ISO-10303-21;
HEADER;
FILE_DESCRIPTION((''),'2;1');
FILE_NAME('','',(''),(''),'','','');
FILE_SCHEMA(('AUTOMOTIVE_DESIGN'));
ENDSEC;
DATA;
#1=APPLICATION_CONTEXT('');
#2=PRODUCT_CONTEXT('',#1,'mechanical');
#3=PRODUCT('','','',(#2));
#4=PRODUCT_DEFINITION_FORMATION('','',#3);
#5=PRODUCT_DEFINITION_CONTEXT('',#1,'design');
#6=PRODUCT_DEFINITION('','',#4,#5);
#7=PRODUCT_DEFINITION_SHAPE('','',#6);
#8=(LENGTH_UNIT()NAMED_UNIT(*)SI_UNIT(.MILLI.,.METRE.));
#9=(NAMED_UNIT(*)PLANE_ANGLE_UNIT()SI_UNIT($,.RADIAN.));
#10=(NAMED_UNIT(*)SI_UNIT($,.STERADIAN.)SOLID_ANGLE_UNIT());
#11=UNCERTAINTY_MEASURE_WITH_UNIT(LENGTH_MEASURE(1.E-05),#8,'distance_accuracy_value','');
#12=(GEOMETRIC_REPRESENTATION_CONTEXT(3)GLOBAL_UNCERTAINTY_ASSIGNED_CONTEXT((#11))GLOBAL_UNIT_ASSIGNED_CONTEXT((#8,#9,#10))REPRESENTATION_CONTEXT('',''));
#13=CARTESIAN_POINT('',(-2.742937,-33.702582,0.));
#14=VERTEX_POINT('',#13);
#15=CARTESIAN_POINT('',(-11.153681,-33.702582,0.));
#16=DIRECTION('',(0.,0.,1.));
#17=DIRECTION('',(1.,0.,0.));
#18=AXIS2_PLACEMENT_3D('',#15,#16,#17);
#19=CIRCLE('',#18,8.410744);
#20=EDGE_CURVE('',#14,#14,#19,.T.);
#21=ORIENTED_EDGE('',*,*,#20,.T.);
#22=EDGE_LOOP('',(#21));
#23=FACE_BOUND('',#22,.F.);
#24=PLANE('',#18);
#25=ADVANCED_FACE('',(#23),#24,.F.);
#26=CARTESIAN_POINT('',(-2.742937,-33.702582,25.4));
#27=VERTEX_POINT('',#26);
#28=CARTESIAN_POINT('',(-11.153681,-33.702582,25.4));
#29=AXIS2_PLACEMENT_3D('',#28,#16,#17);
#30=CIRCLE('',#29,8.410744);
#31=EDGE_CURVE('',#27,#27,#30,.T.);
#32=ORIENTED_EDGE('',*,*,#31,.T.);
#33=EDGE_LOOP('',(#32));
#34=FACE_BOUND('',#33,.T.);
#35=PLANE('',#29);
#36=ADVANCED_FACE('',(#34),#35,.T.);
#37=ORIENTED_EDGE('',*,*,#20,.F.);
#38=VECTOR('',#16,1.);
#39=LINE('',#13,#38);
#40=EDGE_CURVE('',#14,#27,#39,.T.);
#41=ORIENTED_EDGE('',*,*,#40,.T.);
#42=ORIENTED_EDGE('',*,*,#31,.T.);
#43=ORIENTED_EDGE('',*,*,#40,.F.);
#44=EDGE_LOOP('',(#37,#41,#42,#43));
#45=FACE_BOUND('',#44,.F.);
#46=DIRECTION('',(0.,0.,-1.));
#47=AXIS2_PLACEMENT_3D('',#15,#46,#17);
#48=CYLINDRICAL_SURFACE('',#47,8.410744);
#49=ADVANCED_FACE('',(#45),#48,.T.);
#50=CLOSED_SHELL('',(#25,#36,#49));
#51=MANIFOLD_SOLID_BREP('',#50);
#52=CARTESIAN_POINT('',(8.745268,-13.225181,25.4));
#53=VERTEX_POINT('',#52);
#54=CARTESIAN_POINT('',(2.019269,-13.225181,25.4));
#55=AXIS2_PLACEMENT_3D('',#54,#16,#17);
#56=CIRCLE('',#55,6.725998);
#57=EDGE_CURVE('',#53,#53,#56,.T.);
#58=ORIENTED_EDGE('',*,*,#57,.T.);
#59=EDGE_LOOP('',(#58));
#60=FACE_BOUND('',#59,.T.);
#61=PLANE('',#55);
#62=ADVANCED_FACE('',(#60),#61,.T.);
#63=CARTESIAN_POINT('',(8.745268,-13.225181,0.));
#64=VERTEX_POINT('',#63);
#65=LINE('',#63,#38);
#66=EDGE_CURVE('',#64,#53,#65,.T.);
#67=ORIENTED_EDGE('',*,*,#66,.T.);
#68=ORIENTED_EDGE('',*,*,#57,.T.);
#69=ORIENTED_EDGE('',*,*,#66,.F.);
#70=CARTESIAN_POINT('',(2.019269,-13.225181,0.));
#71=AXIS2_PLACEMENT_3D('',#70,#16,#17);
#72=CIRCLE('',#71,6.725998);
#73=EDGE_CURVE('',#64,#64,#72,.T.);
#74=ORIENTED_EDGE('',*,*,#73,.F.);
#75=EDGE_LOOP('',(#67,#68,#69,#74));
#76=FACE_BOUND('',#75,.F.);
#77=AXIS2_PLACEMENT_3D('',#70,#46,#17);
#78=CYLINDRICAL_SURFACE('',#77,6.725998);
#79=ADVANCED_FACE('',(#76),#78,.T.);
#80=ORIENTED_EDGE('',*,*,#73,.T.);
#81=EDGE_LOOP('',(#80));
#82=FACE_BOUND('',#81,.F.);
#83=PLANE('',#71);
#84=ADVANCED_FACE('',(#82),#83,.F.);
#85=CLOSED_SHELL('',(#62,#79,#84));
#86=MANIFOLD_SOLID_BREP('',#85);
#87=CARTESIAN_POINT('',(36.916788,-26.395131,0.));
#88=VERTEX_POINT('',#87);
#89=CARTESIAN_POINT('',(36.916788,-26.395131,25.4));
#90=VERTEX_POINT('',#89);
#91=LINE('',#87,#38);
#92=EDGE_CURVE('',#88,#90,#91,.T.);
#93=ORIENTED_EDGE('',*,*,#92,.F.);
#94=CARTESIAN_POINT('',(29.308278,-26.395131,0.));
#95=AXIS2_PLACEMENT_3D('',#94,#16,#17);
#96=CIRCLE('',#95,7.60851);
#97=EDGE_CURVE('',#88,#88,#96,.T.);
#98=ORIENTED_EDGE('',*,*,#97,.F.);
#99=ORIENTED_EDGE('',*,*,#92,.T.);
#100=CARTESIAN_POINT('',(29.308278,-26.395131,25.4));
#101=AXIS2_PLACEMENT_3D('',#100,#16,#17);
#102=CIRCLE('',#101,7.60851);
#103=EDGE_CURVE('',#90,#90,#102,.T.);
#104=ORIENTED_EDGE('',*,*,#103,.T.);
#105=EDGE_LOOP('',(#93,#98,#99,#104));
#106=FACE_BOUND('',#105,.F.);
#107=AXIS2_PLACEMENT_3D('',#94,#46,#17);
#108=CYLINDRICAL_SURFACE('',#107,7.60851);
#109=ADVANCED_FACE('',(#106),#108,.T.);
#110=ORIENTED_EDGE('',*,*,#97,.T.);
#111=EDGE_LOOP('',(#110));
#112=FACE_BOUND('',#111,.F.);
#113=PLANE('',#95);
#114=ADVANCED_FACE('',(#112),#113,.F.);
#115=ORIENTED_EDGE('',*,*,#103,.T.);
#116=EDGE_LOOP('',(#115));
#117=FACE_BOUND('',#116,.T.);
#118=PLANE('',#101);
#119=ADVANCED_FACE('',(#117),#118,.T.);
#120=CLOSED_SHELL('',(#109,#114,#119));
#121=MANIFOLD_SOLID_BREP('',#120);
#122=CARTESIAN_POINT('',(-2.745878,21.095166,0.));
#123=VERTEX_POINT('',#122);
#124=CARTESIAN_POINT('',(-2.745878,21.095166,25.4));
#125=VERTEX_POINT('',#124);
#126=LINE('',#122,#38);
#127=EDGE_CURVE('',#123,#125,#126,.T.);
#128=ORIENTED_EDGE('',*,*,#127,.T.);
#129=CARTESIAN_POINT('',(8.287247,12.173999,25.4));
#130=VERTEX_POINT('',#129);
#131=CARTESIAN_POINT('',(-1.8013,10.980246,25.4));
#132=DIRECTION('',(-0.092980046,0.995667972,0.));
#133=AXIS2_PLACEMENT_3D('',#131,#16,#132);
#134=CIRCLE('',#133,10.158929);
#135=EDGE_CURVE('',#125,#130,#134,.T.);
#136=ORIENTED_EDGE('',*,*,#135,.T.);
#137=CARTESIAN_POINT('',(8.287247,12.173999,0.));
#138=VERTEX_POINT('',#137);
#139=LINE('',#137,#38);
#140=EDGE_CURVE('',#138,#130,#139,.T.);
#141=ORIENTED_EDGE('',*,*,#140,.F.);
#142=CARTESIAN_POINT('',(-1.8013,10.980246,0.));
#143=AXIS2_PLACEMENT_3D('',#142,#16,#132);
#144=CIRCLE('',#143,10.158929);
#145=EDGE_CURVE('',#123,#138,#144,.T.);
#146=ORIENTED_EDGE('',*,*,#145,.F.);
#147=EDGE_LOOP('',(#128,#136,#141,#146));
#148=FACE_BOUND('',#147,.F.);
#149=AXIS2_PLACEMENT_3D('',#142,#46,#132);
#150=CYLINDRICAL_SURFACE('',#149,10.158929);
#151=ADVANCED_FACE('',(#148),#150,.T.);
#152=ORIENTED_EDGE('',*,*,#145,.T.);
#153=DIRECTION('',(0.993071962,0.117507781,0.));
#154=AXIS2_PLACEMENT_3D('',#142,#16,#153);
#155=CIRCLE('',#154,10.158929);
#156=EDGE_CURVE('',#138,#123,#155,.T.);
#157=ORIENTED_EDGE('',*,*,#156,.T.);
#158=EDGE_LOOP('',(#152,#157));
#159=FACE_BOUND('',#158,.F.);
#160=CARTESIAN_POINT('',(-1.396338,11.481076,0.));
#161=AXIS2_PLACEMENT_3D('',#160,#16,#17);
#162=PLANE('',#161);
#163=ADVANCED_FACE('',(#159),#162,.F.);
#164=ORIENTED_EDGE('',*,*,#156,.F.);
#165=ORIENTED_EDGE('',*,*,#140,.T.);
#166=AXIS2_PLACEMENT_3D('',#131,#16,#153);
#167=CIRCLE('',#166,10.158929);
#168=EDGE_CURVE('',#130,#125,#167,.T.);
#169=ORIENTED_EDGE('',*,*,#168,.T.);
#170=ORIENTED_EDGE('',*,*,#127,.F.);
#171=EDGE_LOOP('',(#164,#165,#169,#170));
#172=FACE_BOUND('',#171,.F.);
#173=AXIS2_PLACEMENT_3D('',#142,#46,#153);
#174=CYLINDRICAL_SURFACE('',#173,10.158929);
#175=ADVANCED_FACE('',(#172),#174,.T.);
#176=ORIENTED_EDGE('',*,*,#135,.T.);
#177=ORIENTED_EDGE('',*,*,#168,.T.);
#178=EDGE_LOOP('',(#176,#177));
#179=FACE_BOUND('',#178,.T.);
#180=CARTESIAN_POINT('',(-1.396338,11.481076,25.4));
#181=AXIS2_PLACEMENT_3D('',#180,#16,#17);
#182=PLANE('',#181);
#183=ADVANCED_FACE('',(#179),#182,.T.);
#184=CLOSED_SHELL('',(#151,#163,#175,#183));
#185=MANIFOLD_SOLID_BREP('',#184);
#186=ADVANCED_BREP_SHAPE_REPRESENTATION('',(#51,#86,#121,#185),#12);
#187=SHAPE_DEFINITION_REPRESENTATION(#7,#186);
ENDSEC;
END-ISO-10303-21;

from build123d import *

# Parameters (mm, degrees)
F5_DEPTH = 25.4
F4_R     = 6.7259983567
F1_R     = 8.4107438271
F2_R     = 7.608509741


# Not quite as in the source:
# - the program builds the solid bodies; features that only make, move or delete a surface that nothing else refers to are left out


with BuildPart() as f5:
    # F0 (on Top) → F5 (new body)
    with BuildSketch(Plane.XY):
        with BuildLine():
            ThreePointArc((-11.4537579939, 7.812615484), (0.3902658063, 1.0605246734), (8.2872472703, 12.1739991009))
            ThreePointArc((8.2872472703, 12.1739991009), (4.5861760116, 18.8798650483), (-2.7458775352, 21.0951657847))
            ThreePointArc((-2.7458775352, 21.0951657847), (-10.2972299306, 16.5500756507), (-11.4537579939, 7.812615484))
        make_face()
    extrude(amount=F5_DEPTH)


with BuildPart() as f5b:
    # F4 (on Top) → F5, piece 2 (new body)
    with BuildSketch(Plane.XY):
        with Locations((2.0192693919, -13.2251810282)):
            Circle(F4_R)
    extrude(amount=F5_DEPTH)


with BuildPart() as f5c:
    # F1 (on Top) → F5, piece 3 (new body)
    with BuildSketch(Plane.XY):
        with Locations((-11.1536812037, -33.7025821209)):
            Circle(F1_R)
    extrude(amount=F5_DEPTH)


with BuildPart() as f5d:
    # F2 (on Top) → F5, piece 4 (new body)
    with BuildSketch(Plane.XY):
        with Locations((29.3082781136, -26.3951309025)):
            Circle(F2_R)
    extrude(amount=F5_DEPTH)


solid = Compound([f5.part, f5b.part, f5c.part, f5d.part])
